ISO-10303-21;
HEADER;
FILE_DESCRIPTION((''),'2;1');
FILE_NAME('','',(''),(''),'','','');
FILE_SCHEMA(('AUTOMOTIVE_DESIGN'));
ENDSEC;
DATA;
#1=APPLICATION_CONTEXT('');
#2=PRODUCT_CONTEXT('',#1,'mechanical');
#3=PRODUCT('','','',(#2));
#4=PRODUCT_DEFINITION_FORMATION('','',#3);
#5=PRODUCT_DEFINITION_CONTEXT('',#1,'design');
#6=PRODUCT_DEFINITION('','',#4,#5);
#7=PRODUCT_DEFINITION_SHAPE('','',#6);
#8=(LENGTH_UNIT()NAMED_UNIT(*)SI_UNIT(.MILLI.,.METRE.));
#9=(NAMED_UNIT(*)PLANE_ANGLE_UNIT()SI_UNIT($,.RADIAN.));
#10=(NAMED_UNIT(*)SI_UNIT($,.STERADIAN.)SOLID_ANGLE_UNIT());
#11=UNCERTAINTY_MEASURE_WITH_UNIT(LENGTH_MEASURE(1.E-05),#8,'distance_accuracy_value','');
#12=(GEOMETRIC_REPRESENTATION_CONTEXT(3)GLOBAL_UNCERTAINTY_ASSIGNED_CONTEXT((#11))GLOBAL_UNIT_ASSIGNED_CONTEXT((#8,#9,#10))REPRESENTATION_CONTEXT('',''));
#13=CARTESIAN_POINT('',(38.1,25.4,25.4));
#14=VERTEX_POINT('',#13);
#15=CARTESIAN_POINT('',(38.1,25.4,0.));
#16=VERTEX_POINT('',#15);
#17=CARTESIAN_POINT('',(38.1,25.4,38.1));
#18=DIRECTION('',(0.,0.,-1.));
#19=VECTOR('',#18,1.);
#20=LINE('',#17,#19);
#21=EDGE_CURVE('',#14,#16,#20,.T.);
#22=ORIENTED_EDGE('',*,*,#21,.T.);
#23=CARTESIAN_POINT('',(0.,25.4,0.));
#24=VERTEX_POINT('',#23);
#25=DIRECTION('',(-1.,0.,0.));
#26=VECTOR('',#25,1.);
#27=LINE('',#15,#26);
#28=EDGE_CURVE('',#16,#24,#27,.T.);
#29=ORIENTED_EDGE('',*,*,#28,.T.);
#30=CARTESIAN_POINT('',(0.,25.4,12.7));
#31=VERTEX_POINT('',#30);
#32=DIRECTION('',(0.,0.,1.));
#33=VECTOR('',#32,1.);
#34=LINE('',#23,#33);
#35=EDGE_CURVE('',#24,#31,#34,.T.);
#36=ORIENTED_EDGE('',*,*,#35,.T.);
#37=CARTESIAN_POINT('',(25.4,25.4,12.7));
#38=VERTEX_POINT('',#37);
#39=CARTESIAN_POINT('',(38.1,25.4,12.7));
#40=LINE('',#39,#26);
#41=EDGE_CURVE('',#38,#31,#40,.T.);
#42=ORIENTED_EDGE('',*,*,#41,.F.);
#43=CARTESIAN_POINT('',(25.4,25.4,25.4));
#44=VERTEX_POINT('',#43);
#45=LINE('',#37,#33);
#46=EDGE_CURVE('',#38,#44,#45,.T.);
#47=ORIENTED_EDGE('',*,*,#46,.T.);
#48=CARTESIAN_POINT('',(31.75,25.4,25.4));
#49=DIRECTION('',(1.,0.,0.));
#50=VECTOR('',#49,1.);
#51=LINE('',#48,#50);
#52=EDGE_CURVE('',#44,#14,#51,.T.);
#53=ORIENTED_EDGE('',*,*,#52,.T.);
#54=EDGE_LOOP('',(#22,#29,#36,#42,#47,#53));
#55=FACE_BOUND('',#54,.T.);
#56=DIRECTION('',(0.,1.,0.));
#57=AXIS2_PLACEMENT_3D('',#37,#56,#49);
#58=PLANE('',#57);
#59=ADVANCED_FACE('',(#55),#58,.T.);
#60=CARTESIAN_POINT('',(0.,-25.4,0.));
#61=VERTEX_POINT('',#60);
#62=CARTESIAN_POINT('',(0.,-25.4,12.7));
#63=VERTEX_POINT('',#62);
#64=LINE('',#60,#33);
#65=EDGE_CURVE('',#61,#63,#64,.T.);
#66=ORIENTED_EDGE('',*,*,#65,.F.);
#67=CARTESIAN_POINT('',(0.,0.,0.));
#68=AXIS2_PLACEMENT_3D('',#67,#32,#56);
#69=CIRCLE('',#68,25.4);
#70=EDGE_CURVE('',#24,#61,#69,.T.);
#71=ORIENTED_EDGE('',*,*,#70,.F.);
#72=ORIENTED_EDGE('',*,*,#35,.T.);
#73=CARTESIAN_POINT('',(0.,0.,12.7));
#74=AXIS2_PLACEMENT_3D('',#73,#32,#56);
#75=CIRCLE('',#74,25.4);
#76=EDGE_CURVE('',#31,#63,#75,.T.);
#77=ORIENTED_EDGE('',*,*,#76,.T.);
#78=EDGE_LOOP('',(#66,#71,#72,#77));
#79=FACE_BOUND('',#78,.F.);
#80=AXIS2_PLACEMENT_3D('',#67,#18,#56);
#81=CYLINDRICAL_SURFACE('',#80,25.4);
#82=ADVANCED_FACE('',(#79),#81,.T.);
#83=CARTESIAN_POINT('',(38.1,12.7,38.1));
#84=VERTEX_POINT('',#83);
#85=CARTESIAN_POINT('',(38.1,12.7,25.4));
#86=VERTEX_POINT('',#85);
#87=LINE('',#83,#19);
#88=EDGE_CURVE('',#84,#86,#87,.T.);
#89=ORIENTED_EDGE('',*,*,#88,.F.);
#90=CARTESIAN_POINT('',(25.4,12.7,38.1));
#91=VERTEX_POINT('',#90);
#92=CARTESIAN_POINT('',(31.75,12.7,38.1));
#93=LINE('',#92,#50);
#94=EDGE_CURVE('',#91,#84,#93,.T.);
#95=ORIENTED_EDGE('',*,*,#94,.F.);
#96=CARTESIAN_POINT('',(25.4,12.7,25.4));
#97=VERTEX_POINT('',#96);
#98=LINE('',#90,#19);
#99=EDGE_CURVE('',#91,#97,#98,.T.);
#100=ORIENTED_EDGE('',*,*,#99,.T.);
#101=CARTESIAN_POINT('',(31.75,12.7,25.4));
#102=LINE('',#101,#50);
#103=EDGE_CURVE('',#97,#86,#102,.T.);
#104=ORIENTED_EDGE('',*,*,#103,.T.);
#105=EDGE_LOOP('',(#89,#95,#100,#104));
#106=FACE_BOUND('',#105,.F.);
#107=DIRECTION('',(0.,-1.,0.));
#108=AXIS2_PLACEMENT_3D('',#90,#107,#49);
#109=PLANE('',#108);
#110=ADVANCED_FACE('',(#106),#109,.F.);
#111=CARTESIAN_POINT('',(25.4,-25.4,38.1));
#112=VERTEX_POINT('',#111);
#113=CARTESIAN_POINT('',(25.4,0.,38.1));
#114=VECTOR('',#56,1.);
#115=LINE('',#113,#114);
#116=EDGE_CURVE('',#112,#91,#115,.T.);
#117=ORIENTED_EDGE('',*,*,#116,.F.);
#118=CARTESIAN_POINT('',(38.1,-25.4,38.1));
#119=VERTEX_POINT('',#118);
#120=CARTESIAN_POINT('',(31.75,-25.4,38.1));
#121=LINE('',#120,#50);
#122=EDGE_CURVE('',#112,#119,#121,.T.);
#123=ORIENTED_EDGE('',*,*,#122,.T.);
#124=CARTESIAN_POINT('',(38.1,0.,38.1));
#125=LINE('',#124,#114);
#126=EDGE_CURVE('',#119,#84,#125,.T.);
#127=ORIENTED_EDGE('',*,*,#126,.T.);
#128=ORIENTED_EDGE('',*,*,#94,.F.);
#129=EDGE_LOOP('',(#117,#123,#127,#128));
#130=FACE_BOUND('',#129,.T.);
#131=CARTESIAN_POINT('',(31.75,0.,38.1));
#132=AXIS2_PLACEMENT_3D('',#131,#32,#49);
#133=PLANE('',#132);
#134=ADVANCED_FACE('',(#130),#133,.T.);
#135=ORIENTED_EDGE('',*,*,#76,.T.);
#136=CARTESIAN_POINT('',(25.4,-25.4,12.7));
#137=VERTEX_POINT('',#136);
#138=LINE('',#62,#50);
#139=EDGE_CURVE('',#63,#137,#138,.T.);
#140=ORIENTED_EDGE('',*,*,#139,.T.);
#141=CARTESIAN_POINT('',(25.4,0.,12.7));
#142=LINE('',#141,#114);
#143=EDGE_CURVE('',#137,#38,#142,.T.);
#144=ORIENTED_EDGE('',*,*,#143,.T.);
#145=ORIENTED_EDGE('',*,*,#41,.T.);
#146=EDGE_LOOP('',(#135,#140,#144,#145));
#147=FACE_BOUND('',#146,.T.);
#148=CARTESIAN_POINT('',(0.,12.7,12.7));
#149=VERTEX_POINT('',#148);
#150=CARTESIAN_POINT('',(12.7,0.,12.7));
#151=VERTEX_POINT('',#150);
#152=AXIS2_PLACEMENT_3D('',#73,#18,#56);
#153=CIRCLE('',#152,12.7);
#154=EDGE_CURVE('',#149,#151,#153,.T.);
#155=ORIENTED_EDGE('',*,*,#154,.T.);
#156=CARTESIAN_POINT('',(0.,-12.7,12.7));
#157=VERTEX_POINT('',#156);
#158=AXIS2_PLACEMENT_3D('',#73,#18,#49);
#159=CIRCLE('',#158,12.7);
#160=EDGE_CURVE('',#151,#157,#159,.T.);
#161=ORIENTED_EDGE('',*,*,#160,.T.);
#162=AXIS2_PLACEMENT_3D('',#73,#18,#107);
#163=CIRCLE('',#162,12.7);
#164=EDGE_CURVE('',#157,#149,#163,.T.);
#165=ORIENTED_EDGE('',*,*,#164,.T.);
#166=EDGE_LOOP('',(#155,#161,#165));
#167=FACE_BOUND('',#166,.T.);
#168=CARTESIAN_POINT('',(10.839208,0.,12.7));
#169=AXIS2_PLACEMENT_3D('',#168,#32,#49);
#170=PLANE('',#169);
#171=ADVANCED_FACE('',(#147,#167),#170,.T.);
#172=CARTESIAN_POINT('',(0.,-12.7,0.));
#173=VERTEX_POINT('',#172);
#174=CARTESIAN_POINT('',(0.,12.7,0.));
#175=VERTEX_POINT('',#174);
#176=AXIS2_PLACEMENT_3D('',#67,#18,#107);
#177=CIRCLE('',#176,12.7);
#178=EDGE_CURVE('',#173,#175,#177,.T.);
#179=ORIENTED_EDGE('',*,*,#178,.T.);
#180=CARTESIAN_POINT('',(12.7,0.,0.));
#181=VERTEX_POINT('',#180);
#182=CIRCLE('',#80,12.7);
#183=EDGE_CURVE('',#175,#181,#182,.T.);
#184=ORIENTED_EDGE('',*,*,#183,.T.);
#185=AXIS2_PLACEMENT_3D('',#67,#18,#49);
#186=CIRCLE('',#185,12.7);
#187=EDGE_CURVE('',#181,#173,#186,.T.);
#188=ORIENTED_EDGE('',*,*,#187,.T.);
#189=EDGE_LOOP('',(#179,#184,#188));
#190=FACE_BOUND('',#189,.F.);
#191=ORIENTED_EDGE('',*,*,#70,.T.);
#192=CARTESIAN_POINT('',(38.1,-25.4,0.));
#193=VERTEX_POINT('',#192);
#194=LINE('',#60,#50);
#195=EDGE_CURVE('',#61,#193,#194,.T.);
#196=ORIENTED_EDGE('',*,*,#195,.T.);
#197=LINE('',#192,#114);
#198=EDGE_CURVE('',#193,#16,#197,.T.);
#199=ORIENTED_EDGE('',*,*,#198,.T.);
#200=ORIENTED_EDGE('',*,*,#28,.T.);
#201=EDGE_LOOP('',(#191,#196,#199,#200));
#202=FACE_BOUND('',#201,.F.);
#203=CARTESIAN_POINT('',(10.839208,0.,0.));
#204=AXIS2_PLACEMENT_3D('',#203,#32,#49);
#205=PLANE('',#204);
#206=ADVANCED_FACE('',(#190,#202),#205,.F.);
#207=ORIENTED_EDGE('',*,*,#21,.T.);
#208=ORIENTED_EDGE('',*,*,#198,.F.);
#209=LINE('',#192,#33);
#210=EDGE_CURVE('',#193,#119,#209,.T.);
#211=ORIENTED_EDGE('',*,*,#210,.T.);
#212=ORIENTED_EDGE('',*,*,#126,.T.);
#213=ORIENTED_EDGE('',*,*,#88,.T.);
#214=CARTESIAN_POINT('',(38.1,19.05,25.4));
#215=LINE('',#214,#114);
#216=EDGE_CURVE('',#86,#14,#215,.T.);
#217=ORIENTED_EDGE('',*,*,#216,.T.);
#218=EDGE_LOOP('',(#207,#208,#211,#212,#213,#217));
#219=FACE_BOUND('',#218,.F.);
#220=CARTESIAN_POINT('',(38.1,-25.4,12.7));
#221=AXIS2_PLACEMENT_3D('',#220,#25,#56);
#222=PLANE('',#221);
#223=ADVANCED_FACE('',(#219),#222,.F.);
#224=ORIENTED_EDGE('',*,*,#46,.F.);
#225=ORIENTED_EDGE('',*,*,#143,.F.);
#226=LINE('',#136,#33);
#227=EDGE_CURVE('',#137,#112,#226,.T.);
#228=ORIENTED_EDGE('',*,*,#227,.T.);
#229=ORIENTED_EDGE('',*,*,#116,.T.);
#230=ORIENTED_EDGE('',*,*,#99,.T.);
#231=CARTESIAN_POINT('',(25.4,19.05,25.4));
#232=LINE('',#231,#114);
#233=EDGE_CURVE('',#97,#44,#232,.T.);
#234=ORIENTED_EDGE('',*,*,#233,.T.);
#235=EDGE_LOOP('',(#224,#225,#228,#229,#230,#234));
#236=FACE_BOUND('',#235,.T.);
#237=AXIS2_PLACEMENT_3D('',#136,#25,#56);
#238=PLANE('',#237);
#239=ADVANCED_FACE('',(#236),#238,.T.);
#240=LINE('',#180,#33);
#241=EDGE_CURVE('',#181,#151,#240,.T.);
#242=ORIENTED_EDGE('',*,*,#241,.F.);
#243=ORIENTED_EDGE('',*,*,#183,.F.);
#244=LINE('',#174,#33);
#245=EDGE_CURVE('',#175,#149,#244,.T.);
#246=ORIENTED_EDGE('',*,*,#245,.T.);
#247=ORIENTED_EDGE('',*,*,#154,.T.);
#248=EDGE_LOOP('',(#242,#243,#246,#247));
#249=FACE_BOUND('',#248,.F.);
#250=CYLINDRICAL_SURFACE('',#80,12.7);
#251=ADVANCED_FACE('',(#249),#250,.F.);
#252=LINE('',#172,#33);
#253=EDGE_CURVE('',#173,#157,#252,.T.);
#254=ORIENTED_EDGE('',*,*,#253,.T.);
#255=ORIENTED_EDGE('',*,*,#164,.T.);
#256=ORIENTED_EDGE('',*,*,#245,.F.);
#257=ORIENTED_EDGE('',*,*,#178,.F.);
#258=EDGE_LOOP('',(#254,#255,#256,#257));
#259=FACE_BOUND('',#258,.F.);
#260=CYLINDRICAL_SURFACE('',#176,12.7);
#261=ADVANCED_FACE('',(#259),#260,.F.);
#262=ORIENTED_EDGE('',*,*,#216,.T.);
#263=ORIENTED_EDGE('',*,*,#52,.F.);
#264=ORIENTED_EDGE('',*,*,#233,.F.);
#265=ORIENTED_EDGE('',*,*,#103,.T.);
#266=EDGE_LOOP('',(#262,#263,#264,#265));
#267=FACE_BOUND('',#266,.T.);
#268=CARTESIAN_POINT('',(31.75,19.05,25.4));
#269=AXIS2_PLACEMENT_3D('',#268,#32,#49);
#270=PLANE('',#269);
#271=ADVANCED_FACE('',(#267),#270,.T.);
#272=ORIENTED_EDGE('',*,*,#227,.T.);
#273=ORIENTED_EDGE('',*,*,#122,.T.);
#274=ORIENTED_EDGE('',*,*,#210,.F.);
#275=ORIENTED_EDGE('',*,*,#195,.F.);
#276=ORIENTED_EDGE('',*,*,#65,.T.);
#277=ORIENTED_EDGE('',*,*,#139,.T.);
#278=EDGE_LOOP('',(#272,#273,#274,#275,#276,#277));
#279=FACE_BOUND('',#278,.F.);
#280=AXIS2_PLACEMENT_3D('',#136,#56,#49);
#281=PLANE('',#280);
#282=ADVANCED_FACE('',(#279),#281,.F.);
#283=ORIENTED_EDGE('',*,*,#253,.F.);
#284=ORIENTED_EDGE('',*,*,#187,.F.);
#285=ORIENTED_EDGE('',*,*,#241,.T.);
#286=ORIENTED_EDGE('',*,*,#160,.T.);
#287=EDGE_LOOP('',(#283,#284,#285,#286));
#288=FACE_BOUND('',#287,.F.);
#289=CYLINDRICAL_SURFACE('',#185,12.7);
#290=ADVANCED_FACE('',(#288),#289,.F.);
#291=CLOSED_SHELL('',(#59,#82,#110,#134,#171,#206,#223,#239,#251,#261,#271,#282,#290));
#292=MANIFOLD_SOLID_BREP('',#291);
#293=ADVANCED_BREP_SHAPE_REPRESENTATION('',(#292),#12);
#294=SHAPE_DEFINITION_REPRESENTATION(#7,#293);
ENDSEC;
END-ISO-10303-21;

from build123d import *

# Parameters (mm, degrees)
F1_DEPTH = 12.7
F2_DEPTH = 12.7
F3_W     = 12.7
F3_H     = 50.8
F4_DEPTH = 25.4
F5_W     = 12.7
F5_H     = 12.7
F6_DEPTH = 12.7


with BuildPart() as f1:
    # F0 (on Top) → F1 (new body)
    with BuildSketch(Plane.XY):
        with BuildLine():
            ThreePointArc((0, 25.4), (17.9605122421, 17.9605122421), (25.4, 0))
            ThreePointArc((25.4, 0), (17.9605122421, -17.9605122421), (0, -25.4))
            Line((0, -25.4), (38.1, -25.4))
            Line((38.1, -25.4), (38.1, 25.4))
            Line((38.1, 25.4), (0, 25.4))
        make_face()
    extrude(amount=F1_DEPTH)

    # F0 (on Top) → F2 (join)
    with BuildSketch(Plane.XY):
        with BuildLine():
            ThreePointArc((0, -25.4), (17.9605122421, -17.9605122421), (25.4, 0))
            ThreePointArc((25.4, 0), (17.9605122421, 17.9605122421), (0, 25.4))
            Line((0, 25.4), (0, 12.7))
            ThreePointArc((0, 12.7), (8.9802561211, 8.9802561211), (12.7, 0))
            ThreePointArc((12.7, 0), (8.9802561211, -8.9802561211), (0, -12.7))
            Line((0, -12.7), (0, -25.4))
        make_face()
        with BuildLine():
            ThreePointArc((0, 25.4), (17.9605122421, 17.9605122421), (25.4, 0))
            ThreePointArc((25.4, 0), (17.9605122421, -17.9605122421), (0, -25.4))
            Line((0, -25.4), (38.1, -25.4))
            Line((38.1, -25.4), (38.1, 25.4))
            Line((38.1, 25.4), (0, 25.4))
        make_face()
        with BuildLine():
            Line((0, 12.7), (0, 25.4))
            ThreePointArc((0, 25.4), (-25.4, 0), (0, -25.4))
            Line((0, -25.4), (0, -12.7))
            ThreePointArc((0, -12.7), (-12.7, 0), (0, 12.7))
        make_face()
    extrude(amount=F2_DEPTH)

    # F3 (on face) → F4 (join)
    with BuildSketch(Plane.XY.offset(12.7)):
        with Locations((31.75, 0)):
            Rectangle(F3_W, F3_H)
    extrude(amount=F4_DEPTH)

    # F5 (on face) → F6 (cut)
    with BuildSketch(Plane.XY.offset(38.1)):
        with Locations((31.75, 19.05)):
            Rectangle(F5_W, F5_H)
    extrude(amount=-F6_DEPTH, mode=Mode.SUBTRACT)


solid = f1.part
